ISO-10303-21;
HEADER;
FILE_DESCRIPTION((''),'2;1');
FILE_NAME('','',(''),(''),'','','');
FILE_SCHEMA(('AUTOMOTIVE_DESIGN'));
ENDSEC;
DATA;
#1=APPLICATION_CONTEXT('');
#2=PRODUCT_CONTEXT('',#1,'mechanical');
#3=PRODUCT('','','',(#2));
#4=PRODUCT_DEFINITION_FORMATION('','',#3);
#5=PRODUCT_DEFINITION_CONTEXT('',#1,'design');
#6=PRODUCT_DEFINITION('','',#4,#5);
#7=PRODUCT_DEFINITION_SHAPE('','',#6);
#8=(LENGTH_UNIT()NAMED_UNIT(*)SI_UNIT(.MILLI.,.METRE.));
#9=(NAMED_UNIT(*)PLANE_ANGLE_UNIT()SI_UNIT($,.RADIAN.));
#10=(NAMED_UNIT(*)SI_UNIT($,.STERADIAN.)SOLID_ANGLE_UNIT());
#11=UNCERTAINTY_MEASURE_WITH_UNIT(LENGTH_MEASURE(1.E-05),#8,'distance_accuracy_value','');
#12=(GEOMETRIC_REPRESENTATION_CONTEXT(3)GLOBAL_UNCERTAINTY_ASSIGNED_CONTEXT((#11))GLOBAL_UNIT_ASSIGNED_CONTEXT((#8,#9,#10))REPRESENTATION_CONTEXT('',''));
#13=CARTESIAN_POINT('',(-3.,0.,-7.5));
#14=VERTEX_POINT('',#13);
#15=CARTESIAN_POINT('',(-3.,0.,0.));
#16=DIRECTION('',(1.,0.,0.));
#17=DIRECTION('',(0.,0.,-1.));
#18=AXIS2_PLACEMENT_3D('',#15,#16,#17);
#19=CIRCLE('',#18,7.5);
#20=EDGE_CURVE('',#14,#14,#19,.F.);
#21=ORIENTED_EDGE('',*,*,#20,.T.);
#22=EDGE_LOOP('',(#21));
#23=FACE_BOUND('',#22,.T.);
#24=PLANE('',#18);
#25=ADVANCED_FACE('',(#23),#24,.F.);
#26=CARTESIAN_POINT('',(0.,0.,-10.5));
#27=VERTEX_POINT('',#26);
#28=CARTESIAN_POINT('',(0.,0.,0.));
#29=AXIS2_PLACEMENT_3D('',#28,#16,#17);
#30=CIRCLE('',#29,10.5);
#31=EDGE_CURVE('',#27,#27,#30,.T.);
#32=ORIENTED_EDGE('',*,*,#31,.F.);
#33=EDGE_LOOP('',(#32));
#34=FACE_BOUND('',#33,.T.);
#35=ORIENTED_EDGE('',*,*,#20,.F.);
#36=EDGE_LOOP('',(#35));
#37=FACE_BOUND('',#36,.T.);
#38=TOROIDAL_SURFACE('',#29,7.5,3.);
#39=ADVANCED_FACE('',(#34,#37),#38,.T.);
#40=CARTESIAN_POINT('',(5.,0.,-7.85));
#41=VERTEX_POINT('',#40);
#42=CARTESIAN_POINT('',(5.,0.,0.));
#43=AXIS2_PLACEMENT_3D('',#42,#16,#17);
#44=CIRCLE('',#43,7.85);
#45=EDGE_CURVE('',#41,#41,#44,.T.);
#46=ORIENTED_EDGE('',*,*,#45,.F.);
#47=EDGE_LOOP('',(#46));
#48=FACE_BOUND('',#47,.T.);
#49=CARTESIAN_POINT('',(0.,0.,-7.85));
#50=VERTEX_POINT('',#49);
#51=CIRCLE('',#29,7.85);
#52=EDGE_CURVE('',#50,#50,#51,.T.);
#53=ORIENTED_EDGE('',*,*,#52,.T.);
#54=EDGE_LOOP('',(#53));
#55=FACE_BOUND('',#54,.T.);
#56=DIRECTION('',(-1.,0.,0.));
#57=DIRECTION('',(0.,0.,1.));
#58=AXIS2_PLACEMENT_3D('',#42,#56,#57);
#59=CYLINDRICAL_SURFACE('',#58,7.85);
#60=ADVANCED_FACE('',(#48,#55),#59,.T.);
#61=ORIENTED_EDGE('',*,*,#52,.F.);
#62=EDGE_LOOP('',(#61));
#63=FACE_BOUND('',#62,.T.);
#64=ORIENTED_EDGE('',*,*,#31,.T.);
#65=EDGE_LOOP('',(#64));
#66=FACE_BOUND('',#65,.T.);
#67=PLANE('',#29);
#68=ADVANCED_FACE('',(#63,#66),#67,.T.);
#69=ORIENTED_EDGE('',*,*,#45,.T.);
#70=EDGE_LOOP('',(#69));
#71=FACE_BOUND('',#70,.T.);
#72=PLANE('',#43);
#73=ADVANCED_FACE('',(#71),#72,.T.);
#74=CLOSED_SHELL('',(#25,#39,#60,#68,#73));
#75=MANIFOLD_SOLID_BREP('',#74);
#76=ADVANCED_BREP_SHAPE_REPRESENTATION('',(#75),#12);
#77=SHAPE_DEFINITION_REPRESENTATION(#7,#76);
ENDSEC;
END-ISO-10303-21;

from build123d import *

# Parameters (mm, degrees)
SKETCH1_R           = 7.85
BOSS_EXTRUDE1_DEPTH = 5
SKETCH1_3_R         = 10.5
BOSS_EXTRUDE2_DEPTH = 3
FILLET1_R           = 3


with BuildPart() as part:
    # Sketch1 → Boss-Extrude1 (new body)
    with BuildSketch(Plane(origin=(0, 0, 0), x_dir=(0, 0, -1), z_dir=(1, 0, 0))):
        Circle(SKETCH1_R)
    extrude(amount=BOSS_EXTRUDE1_DEPTH)

    # Sketch1<3> → Boss-Extrude2 (add)
    with BuildSketch(Plane(origin=(0, 0, 0), x_dir=(0, 0, -1), z_dir=(1, 0, 0))):
        Circle(SKETCH1_3_R)
    extrude(amount=-BOSS_EXTRUDE2_DEPTH)

    # Fillet1
    fillet1_edges = [part.edges().sort_by_distance(p)[0] for p in [
        (-3, 0, 10.5),
    ]]
    fillet(fillet1_edges, radius=FILLET1_R - 0.0001)  # a hair under: the kernel refuses the full size


solid = part.part
